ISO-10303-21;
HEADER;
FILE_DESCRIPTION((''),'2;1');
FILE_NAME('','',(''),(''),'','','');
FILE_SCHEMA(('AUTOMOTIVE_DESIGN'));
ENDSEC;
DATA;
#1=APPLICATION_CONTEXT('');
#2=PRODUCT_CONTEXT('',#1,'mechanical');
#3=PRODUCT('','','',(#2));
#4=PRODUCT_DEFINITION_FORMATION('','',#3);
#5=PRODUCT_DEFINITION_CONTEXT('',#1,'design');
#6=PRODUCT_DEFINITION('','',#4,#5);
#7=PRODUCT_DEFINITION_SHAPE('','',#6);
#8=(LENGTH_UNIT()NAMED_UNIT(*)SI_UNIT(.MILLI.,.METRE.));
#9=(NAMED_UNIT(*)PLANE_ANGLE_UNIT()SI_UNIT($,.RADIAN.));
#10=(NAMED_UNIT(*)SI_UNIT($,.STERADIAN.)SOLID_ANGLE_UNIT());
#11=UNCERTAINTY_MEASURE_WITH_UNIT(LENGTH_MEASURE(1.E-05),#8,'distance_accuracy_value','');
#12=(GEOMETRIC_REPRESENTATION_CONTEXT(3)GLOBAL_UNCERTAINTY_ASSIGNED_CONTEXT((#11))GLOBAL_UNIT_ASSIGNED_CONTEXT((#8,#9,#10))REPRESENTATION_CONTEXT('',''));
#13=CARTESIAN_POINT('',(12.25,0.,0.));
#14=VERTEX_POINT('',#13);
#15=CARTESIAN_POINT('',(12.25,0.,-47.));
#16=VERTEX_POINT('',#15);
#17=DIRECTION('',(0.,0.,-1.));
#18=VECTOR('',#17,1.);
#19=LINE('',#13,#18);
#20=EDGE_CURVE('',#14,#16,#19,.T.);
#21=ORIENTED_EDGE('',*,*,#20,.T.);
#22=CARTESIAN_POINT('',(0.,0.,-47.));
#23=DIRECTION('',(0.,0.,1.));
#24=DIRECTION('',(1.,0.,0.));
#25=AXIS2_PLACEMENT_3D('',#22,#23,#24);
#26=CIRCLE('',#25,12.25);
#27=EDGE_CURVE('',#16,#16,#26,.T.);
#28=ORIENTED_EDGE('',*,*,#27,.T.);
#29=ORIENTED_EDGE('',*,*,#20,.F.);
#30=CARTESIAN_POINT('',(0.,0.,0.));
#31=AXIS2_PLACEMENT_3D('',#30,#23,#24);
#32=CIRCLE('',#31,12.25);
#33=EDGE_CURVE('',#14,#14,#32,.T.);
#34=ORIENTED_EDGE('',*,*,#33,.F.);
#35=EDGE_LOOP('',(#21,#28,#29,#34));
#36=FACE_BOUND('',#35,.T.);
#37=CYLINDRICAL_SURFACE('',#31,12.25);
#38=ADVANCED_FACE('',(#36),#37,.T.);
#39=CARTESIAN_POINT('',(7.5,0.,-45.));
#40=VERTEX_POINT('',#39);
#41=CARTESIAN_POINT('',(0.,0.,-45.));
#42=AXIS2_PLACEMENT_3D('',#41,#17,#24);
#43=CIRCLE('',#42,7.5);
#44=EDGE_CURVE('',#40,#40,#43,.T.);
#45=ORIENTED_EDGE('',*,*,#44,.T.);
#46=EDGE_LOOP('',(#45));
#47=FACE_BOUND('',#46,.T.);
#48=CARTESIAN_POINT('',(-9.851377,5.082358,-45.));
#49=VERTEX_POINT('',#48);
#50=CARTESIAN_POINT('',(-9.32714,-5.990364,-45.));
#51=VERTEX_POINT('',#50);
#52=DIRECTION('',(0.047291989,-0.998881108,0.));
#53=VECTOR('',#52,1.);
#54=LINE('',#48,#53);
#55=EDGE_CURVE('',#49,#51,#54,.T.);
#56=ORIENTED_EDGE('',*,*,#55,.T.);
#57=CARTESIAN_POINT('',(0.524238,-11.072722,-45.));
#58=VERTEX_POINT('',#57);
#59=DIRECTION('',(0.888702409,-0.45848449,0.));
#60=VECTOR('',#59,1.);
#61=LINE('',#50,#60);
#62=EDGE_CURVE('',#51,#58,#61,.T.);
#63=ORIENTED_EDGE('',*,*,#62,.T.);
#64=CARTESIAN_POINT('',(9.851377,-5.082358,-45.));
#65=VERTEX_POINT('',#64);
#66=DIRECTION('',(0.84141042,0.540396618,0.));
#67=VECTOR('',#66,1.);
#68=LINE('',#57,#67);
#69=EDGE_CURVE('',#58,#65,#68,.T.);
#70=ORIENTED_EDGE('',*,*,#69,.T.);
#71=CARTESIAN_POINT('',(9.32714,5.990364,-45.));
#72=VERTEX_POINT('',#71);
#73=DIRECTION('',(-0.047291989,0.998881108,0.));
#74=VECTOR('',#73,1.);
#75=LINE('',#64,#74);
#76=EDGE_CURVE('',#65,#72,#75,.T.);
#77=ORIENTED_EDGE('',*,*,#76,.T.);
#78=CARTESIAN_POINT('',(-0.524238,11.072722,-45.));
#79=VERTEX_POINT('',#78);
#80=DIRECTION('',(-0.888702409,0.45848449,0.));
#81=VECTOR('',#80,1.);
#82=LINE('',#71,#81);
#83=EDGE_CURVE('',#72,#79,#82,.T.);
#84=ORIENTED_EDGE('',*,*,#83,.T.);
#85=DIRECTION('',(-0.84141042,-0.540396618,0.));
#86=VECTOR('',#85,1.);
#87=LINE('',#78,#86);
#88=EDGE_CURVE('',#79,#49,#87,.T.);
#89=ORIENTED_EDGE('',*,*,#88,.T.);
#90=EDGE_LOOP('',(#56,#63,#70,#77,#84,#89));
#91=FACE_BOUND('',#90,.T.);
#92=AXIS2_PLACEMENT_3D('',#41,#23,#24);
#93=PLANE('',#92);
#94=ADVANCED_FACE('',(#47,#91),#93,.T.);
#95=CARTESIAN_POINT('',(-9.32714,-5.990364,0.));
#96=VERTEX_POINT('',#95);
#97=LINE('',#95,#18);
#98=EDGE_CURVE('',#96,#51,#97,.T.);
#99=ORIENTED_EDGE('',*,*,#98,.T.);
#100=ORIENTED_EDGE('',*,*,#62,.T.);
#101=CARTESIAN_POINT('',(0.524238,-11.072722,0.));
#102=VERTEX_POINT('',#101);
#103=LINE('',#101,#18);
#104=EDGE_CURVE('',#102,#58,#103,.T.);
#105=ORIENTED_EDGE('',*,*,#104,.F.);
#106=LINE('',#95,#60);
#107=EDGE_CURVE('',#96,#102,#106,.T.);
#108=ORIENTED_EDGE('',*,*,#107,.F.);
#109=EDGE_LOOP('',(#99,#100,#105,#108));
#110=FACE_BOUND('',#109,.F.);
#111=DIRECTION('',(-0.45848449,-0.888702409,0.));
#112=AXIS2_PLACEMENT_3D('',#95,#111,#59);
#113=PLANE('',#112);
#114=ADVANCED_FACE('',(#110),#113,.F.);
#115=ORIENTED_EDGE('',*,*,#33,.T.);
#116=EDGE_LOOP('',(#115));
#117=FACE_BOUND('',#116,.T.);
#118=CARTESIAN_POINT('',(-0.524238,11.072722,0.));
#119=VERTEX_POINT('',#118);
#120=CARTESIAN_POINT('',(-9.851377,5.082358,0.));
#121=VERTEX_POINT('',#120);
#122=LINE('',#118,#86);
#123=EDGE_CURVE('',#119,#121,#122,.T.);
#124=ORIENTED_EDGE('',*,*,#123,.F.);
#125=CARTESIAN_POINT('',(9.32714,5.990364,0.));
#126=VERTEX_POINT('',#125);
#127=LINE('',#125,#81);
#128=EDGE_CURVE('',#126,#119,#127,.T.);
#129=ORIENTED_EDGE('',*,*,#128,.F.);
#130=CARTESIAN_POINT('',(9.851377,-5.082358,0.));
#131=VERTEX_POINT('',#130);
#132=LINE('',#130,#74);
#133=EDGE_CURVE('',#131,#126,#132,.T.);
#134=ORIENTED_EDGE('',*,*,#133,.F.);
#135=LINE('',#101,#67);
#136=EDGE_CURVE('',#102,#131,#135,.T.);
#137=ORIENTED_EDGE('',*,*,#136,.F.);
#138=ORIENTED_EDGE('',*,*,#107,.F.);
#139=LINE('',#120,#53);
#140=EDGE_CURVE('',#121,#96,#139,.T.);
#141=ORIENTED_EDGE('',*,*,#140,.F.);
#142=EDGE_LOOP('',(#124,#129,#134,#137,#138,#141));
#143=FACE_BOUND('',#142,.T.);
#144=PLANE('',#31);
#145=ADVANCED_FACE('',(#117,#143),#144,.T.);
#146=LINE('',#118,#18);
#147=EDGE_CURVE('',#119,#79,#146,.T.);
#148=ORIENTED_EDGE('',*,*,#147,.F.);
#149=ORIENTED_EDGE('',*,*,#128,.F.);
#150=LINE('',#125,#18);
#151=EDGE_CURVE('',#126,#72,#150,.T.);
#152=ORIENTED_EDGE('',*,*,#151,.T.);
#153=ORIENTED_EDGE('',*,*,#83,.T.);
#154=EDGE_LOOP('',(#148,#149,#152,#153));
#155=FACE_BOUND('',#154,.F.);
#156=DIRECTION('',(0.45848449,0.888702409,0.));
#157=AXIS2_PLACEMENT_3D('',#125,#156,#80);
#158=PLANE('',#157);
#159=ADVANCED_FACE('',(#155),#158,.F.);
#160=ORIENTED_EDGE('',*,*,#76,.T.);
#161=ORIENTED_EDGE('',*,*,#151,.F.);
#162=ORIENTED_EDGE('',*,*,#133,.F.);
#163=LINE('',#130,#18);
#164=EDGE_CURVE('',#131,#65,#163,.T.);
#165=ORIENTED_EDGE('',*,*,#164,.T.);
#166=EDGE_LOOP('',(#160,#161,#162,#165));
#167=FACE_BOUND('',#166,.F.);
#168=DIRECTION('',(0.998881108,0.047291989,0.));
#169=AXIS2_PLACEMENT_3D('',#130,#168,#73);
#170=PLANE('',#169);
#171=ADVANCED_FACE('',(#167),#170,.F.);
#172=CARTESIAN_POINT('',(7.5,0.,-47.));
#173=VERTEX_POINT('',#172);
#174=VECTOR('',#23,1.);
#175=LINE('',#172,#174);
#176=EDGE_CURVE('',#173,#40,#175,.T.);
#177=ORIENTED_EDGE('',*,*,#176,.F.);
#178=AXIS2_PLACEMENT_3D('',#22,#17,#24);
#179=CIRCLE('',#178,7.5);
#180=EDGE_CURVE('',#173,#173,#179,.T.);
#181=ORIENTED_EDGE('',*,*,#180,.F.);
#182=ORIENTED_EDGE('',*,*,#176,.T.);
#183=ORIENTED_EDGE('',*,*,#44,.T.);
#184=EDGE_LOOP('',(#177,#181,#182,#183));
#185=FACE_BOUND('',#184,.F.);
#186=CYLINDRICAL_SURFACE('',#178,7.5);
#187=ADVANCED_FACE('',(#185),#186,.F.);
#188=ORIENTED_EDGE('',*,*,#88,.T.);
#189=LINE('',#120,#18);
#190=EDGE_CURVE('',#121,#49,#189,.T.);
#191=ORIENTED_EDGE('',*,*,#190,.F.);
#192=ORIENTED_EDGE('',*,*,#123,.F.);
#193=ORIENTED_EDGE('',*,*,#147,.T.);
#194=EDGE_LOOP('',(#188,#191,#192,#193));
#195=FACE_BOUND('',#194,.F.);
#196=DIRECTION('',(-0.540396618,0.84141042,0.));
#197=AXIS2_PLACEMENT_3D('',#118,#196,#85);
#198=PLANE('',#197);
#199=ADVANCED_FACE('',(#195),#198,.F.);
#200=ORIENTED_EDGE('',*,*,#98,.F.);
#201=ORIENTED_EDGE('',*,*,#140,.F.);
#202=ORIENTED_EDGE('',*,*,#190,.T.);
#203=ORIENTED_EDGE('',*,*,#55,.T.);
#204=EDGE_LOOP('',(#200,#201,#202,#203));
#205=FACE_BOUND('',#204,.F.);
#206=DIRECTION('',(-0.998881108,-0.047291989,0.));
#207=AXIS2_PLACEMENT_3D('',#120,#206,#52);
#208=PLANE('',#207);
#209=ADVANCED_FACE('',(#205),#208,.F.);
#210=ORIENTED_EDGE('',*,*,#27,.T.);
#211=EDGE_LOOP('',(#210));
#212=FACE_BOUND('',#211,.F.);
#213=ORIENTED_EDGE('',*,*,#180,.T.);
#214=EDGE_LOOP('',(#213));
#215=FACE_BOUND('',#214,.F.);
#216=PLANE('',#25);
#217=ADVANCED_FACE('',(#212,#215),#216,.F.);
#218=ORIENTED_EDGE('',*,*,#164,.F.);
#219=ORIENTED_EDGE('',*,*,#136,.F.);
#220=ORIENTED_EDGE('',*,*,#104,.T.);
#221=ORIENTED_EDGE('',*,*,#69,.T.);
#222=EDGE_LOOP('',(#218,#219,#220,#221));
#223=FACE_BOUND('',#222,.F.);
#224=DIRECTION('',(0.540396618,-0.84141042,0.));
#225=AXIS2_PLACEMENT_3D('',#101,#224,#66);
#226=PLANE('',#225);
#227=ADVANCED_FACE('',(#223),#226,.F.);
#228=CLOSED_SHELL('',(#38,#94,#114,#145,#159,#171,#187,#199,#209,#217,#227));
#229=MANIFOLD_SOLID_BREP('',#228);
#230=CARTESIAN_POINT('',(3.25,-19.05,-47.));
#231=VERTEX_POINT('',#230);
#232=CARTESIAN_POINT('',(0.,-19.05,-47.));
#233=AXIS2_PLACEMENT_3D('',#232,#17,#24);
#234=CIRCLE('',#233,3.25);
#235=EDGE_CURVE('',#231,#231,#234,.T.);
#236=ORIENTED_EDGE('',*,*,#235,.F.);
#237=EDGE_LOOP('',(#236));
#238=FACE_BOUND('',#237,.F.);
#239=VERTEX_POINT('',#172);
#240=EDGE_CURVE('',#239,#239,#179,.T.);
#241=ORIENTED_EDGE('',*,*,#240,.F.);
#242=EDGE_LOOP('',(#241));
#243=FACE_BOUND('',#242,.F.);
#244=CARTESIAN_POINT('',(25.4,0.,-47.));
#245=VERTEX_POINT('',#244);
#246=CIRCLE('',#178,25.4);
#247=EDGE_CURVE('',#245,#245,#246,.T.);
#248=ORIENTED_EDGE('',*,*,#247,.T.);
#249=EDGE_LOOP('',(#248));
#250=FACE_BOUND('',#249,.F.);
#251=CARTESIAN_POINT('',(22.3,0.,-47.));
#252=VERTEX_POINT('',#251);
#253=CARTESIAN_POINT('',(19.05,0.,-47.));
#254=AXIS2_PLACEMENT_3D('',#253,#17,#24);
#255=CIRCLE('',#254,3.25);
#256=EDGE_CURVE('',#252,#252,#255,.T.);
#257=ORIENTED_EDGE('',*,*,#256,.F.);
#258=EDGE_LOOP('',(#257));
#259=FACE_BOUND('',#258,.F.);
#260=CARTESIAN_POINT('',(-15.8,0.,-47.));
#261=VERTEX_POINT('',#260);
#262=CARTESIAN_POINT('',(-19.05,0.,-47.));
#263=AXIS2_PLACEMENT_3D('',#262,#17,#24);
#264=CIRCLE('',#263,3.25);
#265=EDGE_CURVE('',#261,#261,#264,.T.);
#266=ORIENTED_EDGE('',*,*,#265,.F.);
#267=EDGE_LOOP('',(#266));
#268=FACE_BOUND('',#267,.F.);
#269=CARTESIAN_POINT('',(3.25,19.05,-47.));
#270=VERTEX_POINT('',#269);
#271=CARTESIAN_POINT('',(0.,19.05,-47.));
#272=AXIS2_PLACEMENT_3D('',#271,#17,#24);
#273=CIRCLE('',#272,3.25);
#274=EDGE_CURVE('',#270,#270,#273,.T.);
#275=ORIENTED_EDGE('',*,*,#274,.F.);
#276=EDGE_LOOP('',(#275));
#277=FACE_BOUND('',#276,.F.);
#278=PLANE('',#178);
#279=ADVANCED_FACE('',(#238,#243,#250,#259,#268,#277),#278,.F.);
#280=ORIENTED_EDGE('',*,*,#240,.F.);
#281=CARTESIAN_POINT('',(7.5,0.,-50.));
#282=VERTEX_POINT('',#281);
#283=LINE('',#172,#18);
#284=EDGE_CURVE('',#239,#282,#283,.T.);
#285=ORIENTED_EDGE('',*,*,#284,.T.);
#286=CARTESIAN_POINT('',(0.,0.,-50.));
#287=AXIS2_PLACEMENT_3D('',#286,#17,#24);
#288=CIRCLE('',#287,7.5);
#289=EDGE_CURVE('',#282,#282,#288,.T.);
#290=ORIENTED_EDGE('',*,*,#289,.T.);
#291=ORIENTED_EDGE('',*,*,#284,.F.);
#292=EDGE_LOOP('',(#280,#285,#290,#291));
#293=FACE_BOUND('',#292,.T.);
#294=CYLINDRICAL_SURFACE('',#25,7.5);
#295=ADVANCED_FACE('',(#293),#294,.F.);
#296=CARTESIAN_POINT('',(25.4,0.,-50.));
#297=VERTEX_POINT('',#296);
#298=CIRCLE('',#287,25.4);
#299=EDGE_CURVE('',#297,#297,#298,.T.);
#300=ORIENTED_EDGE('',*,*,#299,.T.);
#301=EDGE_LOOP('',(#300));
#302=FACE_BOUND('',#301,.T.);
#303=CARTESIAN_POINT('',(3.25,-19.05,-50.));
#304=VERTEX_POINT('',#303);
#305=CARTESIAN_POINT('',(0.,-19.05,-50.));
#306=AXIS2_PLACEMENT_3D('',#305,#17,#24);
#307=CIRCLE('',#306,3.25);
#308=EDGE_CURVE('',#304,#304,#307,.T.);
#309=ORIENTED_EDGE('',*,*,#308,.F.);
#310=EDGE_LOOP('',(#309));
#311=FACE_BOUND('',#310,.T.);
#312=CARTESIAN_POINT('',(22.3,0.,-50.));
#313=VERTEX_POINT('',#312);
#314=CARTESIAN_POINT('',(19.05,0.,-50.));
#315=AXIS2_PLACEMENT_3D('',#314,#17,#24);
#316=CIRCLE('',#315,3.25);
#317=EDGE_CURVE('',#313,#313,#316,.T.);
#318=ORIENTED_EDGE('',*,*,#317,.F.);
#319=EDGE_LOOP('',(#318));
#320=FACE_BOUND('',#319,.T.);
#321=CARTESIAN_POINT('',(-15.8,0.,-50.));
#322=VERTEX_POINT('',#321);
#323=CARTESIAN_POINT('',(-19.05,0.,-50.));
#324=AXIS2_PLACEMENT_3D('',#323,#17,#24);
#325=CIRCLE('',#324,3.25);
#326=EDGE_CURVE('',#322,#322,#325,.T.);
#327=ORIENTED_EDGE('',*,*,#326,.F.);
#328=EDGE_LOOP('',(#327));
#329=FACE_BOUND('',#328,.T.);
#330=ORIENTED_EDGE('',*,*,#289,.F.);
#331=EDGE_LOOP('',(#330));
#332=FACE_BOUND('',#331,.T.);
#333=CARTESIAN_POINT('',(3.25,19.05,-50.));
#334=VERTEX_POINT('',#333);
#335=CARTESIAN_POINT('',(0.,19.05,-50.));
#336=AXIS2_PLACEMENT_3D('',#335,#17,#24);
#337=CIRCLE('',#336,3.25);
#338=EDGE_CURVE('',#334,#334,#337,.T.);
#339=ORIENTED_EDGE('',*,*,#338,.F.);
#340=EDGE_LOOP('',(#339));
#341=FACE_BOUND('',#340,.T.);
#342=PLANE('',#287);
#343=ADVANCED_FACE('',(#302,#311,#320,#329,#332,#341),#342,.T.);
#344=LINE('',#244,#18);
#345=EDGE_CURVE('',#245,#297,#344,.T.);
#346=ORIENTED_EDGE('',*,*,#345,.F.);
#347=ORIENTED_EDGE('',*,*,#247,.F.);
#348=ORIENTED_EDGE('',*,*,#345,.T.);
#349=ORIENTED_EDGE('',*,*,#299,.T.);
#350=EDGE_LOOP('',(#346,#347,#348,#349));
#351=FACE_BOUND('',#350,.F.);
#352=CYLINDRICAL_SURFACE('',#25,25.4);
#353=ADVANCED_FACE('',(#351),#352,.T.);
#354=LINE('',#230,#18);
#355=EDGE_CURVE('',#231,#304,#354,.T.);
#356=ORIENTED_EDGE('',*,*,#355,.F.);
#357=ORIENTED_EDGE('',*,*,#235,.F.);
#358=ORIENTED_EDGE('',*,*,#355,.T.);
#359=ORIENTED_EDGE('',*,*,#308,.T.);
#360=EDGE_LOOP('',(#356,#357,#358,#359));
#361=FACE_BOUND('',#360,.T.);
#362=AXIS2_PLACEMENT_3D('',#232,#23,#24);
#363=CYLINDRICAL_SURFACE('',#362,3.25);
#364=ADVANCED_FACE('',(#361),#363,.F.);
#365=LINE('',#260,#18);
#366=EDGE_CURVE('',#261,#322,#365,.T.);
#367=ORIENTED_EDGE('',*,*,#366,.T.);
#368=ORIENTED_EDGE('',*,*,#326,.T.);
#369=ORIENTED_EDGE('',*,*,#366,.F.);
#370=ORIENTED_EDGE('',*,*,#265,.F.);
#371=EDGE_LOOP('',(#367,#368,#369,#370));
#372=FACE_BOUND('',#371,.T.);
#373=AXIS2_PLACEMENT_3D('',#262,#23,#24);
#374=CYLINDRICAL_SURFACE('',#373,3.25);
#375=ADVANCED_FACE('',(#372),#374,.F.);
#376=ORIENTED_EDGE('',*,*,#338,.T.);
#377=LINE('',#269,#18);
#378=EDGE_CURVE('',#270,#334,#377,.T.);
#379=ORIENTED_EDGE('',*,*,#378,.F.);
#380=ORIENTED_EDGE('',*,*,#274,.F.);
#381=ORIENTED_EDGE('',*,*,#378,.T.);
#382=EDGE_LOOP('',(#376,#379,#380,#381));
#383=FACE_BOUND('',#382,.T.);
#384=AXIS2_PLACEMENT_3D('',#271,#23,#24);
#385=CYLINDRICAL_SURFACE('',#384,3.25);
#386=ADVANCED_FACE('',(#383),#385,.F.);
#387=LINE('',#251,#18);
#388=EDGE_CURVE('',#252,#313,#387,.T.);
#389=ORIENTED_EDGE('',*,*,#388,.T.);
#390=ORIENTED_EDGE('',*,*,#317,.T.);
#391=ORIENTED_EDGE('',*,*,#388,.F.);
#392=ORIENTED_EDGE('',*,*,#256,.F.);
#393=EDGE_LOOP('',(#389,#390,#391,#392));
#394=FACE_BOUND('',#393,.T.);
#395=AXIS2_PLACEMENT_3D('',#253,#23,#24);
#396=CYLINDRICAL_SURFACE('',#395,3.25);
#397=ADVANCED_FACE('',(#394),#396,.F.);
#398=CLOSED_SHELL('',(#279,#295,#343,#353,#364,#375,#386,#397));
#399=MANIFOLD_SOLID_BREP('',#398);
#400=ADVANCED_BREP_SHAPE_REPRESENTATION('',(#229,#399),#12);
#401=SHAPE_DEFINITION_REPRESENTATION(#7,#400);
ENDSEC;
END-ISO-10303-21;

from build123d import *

# Parameters (mm, degrees)
F1_R     = 12.25
F2_DEPTH = 47
F3_DEPTH = 45
F4_R     = 7.5
F5_DEPTH = 25
F6_R     = 25.4
F6_R_2   = 3.25
F6_R_3   = 12.25
F6_R_4   = 7.5
F7_DEPTH = 3


with BuildPart() as f2:
    # F1 (on Top) → F2 (new body)
    with BuildSketch(Plane.XY):
        Circle(F1_R)
    extrude(amount=-F2_DEPTH)

    # F0 (on Top) → F3 (cut)
    with BuildSketch(Plane.XY):
        Polygon((-0.5242376146, 11.0727221099), (-9.8513774435, 5.0823579631), (-9.327139829, -5.9903641468), (0.5242376146, -11.0727221099), (9.8513774435, -5.0823579631), (9.327139829, 5.9903641468), align=None)
    extrude(amount=-F3_DEPTH, mode=Mode.SUBTRACT)

    # F4 (on face) → F5 (cut)
    with BuildSketch(Plane(origin=(0, 0, -47), x_dir=(1, 0, 0), z_dir=(0, 0, -1))):
        Circle(F4_R)
    extrude(amount=-F5_DEPTH, mode=Mode.SUBTRACT)


with BuildPart() as f7:
    # F6 (on face) → F7 (new body)
    with BuildSketch(Plane(origin=(0, 0, -47), x_dir=(1, 0, 0), z_dir=(0, 0, -1))):
        Circle(F6_R)
        with Locations((0, -19.05)):
            Circle(F6_R_2, mode=Mode.SUBTRACT)
        with Locations((-19.05, 0)):
            Circle(F6_R_2, mode=Mode.SUBTRACT)
        Circle(F6_R_3, mode=Mode.SUBTRACT)
        with Locations((19.05, 0)):
            Circle(F6_R_2, mode=Mode.SUBTRACT)
        with Locations((0, 19.05)):
            Circle(F6_R_2, mode=Mode.SUBTRACT)
        Circle(F6_R_3)
        Circle(F6_R_4, mode=Mode.SUBTRACT)
    extrude(amount=F7_DEPTH)


solid = Compound([f2.part, f7.part])
